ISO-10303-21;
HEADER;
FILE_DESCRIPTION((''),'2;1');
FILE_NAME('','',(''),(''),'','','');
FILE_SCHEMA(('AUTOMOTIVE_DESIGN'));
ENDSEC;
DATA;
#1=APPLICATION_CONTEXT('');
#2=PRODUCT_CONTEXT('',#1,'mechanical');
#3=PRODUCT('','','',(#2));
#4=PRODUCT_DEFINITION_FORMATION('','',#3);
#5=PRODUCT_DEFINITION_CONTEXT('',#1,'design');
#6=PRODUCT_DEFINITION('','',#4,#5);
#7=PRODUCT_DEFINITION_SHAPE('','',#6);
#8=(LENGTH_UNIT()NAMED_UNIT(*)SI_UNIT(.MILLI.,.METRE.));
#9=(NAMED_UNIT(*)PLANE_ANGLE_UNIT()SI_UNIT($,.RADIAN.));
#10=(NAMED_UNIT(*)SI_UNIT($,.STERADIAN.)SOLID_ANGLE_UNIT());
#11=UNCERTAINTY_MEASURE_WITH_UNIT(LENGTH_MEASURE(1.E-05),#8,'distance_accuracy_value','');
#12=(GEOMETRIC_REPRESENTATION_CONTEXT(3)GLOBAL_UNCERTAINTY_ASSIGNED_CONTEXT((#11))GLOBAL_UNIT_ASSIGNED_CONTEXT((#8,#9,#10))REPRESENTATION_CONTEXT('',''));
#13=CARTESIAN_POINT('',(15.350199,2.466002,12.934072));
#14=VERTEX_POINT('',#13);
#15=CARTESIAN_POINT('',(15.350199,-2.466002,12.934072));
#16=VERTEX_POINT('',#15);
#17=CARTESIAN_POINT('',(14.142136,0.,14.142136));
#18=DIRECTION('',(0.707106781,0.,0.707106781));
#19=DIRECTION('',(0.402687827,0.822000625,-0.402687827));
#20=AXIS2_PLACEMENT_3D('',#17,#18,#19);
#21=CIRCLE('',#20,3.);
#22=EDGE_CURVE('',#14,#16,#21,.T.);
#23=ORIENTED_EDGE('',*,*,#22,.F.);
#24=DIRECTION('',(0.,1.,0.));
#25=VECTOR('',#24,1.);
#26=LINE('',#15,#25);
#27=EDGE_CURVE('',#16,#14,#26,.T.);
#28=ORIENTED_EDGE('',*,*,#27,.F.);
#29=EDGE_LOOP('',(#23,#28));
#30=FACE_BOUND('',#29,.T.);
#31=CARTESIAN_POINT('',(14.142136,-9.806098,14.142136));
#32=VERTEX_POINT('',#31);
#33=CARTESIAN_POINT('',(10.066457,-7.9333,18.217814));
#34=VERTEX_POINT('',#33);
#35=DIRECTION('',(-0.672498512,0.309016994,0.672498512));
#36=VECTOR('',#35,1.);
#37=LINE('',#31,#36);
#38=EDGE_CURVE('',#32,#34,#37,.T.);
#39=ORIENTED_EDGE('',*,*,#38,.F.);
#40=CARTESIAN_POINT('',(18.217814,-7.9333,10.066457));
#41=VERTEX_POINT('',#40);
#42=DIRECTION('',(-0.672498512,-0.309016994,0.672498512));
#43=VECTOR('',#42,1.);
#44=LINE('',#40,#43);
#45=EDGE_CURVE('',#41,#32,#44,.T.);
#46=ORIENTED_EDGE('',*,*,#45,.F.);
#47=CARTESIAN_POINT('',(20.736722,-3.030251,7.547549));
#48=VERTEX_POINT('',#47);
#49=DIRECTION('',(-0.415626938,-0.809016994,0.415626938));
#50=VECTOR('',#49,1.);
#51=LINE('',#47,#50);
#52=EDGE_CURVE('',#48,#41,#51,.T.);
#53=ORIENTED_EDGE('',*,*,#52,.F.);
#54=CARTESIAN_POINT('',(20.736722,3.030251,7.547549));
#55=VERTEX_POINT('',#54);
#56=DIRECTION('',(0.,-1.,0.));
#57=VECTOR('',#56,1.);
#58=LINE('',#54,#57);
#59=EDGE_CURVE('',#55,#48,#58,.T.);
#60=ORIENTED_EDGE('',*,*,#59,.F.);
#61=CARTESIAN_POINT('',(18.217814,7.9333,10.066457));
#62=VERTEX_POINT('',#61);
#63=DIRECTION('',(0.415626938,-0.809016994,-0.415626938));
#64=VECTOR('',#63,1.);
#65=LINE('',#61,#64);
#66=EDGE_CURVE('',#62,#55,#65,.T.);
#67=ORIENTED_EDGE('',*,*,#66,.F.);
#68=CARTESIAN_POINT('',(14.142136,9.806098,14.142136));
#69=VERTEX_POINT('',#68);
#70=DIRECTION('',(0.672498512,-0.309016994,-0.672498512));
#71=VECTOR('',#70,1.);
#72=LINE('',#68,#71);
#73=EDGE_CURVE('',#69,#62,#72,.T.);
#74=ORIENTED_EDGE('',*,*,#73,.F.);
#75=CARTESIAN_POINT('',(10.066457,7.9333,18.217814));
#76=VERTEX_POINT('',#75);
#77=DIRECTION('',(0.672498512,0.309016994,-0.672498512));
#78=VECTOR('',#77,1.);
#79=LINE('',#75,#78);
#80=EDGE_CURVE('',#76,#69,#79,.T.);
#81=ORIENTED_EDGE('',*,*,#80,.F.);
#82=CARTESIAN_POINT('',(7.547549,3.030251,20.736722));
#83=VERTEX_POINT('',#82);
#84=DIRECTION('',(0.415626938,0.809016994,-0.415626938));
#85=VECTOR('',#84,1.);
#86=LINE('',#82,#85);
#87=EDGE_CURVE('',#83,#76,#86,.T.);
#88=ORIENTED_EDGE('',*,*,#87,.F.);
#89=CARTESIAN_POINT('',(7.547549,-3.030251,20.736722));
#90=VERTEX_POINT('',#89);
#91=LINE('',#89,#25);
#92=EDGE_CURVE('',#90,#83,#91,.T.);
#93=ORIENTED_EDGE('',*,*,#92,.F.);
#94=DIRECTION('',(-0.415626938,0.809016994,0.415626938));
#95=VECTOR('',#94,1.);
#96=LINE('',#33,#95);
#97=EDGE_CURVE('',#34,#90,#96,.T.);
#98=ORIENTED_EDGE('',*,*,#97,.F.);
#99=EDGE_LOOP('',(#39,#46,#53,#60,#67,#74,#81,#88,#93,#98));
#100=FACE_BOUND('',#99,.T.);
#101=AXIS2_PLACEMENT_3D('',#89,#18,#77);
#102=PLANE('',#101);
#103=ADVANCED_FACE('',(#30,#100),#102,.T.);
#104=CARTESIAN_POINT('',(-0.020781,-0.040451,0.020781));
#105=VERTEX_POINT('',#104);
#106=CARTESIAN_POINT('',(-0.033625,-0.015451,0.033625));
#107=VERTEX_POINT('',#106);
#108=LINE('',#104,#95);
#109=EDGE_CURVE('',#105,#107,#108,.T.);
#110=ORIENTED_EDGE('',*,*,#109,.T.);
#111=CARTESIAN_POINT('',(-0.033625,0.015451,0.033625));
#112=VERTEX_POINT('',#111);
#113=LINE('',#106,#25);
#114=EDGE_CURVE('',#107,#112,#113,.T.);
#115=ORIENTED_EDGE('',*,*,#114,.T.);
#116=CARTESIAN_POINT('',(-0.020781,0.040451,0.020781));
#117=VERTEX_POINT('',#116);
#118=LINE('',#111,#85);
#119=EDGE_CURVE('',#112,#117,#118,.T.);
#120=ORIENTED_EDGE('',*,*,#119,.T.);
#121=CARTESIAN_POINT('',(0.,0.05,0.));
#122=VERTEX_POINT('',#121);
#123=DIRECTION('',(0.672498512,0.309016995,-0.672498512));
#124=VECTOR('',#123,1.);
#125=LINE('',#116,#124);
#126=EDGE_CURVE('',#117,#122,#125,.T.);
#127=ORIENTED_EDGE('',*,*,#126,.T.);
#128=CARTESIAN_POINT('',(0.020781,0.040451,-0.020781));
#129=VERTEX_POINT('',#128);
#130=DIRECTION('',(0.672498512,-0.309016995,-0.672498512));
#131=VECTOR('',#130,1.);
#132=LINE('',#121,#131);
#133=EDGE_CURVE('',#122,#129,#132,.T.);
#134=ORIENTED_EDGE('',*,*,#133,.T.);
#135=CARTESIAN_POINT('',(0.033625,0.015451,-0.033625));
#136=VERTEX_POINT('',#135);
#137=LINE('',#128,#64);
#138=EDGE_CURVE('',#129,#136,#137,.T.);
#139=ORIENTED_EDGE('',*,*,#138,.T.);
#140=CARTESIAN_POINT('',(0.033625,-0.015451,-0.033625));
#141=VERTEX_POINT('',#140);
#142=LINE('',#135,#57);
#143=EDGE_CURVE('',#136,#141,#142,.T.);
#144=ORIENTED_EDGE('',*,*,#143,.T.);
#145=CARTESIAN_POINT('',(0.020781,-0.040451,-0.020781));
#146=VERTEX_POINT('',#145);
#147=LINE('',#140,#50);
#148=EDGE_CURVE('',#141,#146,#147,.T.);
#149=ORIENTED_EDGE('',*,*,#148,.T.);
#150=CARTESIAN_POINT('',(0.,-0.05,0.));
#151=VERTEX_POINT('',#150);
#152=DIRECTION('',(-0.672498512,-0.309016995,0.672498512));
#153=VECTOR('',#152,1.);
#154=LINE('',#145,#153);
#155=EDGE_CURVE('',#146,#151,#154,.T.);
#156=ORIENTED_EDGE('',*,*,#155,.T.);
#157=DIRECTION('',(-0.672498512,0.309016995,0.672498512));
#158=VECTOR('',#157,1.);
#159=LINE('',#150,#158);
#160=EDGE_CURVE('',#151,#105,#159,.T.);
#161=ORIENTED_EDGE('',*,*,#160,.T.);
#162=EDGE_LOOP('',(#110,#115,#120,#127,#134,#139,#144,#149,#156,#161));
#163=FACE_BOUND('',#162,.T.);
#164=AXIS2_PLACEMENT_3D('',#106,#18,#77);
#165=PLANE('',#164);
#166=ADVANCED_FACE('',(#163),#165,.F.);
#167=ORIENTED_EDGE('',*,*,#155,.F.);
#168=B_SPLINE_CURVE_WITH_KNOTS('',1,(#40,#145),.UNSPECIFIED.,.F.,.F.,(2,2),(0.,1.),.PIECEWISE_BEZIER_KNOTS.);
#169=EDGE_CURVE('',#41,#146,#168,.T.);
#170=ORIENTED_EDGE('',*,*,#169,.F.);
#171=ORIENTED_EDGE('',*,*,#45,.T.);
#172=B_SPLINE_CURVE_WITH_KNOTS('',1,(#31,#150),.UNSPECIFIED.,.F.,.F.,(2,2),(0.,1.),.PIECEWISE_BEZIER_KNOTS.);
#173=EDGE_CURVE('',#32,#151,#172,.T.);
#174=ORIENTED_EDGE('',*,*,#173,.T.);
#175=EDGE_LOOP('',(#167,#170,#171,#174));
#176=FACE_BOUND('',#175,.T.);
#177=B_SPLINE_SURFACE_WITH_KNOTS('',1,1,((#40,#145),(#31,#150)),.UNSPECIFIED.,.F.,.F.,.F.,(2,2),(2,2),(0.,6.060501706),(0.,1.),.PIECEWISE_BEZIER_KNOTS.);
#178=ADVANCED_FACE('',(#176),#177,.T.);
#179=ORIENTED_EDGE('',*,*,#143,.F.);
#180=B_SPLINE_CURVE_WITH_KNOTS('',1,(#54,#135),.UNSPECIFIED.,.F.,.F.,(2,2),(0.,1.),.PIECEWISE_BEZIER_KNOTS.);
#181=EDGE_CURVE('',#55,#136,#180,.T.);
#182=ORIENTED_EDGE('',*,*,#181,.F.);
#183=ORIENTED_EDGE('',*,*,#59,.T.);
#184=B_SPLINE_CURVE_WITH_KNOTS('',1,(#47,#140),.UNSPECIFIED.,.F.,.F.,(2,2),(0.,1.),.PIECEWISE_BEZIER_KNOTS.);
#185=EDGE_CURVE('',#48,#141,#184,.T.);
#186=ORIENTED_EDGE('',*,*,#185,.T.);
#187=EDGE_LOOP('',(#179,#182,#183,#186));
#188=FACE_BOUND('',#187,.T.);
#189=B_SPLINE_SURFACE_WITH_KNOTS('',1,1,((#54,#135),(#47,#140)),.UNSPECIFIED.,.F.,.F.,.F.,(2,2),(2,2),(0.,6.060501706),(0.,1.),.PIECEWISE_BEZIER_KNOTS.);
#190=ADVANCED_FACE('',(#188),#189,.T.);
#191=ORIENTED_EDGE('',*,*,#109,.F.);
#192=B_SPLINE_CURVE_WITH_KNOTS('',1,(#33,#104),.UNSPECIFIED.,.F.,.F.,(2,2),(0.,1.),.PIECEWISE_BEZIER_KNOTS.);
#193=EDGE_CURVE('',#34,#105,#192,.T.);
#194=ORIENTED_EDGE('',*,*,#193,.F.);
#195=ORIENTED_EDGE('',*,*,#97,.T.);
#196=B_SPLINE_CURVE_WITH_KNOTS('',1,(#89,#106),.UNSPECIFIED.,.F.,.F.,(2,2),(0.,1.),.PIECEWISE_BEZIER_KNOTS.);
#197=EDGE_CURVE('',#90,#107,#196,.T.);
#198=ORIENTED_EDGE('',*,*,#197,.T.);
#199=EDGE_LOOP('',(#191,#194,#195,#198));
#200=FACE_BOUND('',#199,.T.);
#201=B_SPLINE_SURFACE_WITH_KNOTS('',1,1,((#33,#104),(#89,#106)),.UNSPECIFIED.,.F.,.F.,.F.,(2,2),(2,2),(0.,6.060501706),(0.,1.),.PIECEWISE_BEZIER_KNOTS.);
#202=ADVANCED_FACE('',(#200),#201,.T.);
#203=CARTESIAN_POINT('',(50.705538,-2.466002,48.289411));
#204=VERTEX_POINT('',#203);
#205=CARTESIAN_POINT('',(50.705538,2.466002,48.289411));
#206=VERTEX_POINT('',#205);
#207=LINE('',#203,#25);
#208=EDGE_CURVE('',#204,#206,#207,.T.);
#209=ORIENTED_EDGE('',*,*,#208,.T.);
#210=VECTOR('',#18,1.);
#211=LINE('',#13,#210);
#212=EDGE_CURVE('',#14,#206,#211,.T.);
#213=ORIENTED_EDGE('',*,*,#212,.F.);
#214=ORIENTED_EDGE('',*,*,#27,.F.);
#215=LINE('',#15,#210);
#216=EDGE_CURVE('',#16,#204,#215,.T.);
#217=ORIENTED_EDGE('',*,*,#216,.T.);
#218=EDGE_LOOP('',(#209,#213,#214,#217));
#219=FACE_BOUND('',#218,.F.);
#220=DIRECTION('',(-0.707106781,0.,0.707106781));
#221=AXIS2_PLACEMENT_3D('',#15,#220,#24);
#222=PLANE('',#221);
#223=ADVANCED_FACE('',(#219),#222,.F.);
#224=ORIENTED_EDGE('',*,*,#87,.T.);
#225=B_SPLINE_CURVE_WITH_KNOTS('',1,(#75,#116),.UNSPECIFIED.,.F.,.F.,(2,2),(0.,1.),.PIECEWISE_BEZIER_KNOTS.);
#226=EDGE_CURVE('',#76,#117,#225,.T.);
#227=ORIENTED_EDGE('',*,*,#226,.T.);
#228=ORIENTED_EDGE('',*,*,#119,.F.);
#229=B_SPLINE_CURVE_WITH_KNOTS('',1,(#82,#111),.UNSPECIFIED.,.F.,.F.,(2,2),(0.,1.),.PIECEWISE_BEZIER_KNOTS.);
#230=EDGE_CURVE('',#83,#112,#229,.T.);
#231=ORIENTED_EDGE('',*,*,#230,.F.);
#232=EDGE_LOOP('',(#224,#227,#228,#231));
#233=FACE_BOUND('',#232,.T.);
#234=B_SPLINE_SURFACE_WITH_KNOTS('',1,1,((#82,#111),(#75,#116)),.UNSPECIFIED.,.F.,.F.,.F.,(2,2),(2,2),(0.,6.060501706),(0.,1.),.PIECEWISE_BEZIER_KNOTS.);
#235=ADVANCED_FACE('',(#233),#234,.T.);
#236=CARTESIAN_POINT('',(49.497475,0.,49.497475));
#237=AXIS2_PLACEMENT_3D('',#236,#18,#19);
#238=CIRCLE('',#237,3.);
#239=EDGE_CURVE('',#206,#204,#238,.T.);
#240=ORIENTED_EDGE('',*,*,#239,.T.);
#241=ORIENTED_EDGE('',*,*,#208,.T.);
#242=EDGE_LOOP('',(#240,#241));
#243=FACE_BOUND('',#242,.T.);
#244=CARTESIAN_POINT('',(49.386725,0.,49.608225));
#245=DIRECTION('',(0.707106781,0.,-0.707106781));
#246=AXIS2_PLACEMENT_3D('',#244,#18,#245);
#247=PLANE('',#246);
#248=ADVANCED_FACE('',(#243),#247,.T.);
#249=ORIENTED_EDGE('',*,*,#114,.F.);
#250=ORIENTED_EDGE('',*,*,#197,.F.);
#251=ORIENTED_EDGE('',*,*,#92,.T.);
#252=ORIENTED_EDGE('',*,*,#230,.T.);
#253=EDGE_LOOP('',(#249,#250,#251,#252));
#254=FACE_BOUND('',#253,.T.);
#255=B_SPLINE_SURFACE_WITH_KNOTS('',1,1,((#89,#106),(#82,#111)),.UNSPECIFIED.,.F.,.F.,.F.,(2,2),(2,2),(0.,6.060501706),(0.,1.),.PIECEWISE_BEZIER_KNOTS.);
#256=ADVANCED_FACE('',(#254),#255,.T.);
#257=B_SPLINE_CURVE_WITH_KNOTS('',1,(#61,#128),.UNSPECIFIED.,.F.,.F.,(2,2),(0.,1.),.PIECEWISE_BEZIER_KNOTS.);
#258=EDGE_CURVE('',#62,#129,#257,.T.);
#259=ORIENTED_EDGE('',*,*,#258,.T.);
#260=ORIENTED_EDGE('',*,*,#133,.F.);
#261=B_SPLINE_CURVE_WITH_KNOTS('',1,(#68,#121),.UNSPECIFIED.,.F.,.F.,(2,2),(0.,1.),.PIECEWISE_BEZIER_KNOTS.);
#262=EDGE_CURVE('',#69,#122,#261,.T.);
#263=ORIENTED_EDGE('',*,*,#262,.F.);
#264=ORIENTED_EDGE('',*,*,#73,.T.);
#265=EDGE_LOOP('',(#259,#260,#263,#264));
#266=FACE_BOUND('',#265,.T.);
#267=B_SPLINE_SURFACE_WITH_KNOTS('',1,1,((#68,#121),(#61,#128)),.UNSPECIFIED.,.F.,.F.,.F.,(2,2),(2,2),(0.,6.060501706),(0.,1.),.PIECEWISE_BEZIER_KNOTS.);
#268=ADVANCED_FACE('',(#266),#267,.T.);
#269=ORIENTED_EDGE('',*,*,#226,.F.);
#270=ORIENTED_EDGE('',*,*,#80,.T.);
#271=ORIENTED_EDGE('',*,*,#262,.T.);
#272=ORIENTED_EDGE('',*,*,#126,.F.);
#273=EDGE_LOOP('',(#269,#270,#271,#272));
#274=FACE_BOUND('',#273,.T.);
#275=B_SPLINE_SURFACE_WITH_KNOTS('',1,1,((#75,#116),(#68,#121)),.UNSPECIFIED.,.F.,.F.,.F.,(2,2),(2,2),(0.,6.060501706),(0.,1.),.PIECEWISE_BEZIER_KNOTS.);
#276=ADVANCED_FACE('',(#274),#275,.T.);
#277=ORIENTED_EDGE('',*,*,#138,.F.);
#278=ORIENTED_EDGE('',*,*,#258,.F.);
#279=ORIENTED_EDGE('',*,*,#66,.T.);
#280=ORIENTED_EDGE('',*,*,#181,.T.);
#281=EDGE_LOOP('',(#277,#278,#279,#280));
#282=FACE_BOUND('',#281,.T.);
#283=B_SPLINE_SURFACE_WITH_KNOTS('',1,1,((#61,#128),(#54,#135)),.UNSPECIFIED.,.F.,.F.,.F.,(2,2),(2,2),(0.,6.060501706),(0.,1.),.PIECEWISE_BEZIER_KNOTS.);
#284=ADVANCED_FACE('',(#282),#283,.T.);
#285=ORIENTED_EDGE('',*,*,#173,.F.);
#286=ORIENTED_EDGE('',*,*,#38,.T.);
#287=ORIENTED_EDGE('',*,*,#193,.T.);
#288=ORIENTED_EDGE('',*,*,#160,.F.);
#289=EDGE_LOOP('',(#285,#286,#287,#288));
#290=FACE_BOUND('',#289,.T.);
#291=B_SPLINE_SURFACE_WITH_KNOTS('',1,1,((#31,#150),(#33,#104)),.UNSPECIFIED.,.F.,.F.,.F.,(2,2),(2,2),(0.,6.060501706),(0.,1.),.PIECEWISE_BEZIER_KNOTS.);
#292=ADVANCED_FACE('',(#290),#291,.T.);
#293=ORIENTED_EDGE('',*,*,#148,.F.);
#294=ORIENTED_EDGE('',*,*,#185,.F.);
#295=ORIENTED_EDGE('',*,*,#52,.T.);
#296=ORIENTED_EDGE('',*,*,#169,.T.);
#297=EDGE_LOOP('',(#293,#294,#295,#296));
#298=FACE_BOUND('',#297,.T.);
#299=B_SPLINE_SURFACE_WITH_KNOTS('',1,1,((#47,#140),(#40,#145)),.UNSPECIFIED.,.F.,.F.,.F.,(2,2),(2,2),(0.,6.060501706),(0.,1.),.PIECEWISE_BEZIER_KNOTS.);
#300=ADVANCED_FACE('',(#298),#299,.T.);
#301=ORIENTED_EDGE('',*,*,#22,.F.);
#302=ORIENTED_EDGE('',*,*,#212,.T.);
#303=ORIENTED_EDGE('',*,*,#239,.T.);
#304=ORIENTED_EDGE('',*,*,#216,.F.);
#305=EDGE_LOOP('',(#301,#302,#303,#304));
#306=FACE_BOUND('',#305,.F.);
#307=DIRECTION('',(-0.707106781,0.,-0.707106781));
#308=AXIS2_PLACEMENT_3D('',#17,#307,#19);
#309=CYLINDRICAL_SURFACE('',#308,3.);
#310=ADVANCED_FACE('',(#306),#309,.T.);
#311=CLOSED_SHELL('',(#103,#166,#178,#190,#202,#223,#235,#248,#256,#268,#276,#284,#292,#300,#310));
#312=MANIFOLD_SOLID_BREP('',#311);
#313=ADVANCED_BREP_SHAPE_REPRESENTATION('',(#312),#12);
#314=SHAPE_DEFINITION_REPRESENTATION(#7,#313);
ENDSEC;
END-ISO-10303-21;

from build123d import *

# Parameters (mm, degrees)
F7_DEPTH = 50
F8_W     = 5
F8_H     = 5
F9_DEPTH = 12.5


with BuildPart() as f5:
    # F2 (on face) → F5 section 0
    with BuildSketch(Plane(origin=(14.1421356237, 0, 14.1421356237), x_dir=(0.7071067812, 0, -0.7071067812), z_dir=(-0.7071067812, 0, -0.7071067812))):
        Polygon((-9.3261531631, 3.0302508528), (-9.3261531631, -3.0302508528), (-5.7638796391, -7.933299727), (0, -9.8060977485), (5.7638796391, -7.933299727), (9.3261531631, -3.0302508528), (9.3261531631, 3.0302508528), (5.7638796391, 7.933299727), (0, 9.8060977485), (-5.7638796391, 7.933299727), align=None)
    # F4 (on face) → F5 section 1
    with BuildSketch(Plane(origin=(0, 0, 0), x_dir=(0.7071067812, 0, -0.7071067812), z_dir=(-0.7071067812, 0, -0.7071067812))):
        Polygon((-0.0475528258, 0.0154508497), (-0.0475528258, -0.0154508497), (-0.0293892626, -0.0404508497), (0, -0.05), (0.0293892626, -0.0404508497), (0.0475528258, -0.0154508497), (0.0475528258, 0.0154508497), (0.0293892626, 0.0404508497), (0, 0.05), (-0.0293892626, 0.0404508497), align=None)
    loft()

    # F6 (on face) → F7 (join)
    with BuildSketch(Plane(origin=(14.1421356237, 0, 14.1421356237), x_dir=(0.7071067812, 0, -0.7071067812), z_dir=(0.7071067812, 0, 0.7071067812))):
        with BuildLine():
            Line((1.7084597584, -2.4660018763), (1.7084597584, 2.4660018763))
            ThreePointArc((1.7084597584, 2.4660018763), (-3, 0), (1.7084597584, -2.4660018763))
        make_face()
    extrude(amount=F7_DEPTH)

    # F8 (on Front) → F9 (cut, symmetric)
    with BuildSketch(Plane.XZ):
        with Locations((11.3405170292, 22.6421356237)):
            Rectangle(F8_W, F8_H)
    extrude(amount=F9_DEPTH, both=True, mode=Mode.SUBTRACT)


solid = f5.part
